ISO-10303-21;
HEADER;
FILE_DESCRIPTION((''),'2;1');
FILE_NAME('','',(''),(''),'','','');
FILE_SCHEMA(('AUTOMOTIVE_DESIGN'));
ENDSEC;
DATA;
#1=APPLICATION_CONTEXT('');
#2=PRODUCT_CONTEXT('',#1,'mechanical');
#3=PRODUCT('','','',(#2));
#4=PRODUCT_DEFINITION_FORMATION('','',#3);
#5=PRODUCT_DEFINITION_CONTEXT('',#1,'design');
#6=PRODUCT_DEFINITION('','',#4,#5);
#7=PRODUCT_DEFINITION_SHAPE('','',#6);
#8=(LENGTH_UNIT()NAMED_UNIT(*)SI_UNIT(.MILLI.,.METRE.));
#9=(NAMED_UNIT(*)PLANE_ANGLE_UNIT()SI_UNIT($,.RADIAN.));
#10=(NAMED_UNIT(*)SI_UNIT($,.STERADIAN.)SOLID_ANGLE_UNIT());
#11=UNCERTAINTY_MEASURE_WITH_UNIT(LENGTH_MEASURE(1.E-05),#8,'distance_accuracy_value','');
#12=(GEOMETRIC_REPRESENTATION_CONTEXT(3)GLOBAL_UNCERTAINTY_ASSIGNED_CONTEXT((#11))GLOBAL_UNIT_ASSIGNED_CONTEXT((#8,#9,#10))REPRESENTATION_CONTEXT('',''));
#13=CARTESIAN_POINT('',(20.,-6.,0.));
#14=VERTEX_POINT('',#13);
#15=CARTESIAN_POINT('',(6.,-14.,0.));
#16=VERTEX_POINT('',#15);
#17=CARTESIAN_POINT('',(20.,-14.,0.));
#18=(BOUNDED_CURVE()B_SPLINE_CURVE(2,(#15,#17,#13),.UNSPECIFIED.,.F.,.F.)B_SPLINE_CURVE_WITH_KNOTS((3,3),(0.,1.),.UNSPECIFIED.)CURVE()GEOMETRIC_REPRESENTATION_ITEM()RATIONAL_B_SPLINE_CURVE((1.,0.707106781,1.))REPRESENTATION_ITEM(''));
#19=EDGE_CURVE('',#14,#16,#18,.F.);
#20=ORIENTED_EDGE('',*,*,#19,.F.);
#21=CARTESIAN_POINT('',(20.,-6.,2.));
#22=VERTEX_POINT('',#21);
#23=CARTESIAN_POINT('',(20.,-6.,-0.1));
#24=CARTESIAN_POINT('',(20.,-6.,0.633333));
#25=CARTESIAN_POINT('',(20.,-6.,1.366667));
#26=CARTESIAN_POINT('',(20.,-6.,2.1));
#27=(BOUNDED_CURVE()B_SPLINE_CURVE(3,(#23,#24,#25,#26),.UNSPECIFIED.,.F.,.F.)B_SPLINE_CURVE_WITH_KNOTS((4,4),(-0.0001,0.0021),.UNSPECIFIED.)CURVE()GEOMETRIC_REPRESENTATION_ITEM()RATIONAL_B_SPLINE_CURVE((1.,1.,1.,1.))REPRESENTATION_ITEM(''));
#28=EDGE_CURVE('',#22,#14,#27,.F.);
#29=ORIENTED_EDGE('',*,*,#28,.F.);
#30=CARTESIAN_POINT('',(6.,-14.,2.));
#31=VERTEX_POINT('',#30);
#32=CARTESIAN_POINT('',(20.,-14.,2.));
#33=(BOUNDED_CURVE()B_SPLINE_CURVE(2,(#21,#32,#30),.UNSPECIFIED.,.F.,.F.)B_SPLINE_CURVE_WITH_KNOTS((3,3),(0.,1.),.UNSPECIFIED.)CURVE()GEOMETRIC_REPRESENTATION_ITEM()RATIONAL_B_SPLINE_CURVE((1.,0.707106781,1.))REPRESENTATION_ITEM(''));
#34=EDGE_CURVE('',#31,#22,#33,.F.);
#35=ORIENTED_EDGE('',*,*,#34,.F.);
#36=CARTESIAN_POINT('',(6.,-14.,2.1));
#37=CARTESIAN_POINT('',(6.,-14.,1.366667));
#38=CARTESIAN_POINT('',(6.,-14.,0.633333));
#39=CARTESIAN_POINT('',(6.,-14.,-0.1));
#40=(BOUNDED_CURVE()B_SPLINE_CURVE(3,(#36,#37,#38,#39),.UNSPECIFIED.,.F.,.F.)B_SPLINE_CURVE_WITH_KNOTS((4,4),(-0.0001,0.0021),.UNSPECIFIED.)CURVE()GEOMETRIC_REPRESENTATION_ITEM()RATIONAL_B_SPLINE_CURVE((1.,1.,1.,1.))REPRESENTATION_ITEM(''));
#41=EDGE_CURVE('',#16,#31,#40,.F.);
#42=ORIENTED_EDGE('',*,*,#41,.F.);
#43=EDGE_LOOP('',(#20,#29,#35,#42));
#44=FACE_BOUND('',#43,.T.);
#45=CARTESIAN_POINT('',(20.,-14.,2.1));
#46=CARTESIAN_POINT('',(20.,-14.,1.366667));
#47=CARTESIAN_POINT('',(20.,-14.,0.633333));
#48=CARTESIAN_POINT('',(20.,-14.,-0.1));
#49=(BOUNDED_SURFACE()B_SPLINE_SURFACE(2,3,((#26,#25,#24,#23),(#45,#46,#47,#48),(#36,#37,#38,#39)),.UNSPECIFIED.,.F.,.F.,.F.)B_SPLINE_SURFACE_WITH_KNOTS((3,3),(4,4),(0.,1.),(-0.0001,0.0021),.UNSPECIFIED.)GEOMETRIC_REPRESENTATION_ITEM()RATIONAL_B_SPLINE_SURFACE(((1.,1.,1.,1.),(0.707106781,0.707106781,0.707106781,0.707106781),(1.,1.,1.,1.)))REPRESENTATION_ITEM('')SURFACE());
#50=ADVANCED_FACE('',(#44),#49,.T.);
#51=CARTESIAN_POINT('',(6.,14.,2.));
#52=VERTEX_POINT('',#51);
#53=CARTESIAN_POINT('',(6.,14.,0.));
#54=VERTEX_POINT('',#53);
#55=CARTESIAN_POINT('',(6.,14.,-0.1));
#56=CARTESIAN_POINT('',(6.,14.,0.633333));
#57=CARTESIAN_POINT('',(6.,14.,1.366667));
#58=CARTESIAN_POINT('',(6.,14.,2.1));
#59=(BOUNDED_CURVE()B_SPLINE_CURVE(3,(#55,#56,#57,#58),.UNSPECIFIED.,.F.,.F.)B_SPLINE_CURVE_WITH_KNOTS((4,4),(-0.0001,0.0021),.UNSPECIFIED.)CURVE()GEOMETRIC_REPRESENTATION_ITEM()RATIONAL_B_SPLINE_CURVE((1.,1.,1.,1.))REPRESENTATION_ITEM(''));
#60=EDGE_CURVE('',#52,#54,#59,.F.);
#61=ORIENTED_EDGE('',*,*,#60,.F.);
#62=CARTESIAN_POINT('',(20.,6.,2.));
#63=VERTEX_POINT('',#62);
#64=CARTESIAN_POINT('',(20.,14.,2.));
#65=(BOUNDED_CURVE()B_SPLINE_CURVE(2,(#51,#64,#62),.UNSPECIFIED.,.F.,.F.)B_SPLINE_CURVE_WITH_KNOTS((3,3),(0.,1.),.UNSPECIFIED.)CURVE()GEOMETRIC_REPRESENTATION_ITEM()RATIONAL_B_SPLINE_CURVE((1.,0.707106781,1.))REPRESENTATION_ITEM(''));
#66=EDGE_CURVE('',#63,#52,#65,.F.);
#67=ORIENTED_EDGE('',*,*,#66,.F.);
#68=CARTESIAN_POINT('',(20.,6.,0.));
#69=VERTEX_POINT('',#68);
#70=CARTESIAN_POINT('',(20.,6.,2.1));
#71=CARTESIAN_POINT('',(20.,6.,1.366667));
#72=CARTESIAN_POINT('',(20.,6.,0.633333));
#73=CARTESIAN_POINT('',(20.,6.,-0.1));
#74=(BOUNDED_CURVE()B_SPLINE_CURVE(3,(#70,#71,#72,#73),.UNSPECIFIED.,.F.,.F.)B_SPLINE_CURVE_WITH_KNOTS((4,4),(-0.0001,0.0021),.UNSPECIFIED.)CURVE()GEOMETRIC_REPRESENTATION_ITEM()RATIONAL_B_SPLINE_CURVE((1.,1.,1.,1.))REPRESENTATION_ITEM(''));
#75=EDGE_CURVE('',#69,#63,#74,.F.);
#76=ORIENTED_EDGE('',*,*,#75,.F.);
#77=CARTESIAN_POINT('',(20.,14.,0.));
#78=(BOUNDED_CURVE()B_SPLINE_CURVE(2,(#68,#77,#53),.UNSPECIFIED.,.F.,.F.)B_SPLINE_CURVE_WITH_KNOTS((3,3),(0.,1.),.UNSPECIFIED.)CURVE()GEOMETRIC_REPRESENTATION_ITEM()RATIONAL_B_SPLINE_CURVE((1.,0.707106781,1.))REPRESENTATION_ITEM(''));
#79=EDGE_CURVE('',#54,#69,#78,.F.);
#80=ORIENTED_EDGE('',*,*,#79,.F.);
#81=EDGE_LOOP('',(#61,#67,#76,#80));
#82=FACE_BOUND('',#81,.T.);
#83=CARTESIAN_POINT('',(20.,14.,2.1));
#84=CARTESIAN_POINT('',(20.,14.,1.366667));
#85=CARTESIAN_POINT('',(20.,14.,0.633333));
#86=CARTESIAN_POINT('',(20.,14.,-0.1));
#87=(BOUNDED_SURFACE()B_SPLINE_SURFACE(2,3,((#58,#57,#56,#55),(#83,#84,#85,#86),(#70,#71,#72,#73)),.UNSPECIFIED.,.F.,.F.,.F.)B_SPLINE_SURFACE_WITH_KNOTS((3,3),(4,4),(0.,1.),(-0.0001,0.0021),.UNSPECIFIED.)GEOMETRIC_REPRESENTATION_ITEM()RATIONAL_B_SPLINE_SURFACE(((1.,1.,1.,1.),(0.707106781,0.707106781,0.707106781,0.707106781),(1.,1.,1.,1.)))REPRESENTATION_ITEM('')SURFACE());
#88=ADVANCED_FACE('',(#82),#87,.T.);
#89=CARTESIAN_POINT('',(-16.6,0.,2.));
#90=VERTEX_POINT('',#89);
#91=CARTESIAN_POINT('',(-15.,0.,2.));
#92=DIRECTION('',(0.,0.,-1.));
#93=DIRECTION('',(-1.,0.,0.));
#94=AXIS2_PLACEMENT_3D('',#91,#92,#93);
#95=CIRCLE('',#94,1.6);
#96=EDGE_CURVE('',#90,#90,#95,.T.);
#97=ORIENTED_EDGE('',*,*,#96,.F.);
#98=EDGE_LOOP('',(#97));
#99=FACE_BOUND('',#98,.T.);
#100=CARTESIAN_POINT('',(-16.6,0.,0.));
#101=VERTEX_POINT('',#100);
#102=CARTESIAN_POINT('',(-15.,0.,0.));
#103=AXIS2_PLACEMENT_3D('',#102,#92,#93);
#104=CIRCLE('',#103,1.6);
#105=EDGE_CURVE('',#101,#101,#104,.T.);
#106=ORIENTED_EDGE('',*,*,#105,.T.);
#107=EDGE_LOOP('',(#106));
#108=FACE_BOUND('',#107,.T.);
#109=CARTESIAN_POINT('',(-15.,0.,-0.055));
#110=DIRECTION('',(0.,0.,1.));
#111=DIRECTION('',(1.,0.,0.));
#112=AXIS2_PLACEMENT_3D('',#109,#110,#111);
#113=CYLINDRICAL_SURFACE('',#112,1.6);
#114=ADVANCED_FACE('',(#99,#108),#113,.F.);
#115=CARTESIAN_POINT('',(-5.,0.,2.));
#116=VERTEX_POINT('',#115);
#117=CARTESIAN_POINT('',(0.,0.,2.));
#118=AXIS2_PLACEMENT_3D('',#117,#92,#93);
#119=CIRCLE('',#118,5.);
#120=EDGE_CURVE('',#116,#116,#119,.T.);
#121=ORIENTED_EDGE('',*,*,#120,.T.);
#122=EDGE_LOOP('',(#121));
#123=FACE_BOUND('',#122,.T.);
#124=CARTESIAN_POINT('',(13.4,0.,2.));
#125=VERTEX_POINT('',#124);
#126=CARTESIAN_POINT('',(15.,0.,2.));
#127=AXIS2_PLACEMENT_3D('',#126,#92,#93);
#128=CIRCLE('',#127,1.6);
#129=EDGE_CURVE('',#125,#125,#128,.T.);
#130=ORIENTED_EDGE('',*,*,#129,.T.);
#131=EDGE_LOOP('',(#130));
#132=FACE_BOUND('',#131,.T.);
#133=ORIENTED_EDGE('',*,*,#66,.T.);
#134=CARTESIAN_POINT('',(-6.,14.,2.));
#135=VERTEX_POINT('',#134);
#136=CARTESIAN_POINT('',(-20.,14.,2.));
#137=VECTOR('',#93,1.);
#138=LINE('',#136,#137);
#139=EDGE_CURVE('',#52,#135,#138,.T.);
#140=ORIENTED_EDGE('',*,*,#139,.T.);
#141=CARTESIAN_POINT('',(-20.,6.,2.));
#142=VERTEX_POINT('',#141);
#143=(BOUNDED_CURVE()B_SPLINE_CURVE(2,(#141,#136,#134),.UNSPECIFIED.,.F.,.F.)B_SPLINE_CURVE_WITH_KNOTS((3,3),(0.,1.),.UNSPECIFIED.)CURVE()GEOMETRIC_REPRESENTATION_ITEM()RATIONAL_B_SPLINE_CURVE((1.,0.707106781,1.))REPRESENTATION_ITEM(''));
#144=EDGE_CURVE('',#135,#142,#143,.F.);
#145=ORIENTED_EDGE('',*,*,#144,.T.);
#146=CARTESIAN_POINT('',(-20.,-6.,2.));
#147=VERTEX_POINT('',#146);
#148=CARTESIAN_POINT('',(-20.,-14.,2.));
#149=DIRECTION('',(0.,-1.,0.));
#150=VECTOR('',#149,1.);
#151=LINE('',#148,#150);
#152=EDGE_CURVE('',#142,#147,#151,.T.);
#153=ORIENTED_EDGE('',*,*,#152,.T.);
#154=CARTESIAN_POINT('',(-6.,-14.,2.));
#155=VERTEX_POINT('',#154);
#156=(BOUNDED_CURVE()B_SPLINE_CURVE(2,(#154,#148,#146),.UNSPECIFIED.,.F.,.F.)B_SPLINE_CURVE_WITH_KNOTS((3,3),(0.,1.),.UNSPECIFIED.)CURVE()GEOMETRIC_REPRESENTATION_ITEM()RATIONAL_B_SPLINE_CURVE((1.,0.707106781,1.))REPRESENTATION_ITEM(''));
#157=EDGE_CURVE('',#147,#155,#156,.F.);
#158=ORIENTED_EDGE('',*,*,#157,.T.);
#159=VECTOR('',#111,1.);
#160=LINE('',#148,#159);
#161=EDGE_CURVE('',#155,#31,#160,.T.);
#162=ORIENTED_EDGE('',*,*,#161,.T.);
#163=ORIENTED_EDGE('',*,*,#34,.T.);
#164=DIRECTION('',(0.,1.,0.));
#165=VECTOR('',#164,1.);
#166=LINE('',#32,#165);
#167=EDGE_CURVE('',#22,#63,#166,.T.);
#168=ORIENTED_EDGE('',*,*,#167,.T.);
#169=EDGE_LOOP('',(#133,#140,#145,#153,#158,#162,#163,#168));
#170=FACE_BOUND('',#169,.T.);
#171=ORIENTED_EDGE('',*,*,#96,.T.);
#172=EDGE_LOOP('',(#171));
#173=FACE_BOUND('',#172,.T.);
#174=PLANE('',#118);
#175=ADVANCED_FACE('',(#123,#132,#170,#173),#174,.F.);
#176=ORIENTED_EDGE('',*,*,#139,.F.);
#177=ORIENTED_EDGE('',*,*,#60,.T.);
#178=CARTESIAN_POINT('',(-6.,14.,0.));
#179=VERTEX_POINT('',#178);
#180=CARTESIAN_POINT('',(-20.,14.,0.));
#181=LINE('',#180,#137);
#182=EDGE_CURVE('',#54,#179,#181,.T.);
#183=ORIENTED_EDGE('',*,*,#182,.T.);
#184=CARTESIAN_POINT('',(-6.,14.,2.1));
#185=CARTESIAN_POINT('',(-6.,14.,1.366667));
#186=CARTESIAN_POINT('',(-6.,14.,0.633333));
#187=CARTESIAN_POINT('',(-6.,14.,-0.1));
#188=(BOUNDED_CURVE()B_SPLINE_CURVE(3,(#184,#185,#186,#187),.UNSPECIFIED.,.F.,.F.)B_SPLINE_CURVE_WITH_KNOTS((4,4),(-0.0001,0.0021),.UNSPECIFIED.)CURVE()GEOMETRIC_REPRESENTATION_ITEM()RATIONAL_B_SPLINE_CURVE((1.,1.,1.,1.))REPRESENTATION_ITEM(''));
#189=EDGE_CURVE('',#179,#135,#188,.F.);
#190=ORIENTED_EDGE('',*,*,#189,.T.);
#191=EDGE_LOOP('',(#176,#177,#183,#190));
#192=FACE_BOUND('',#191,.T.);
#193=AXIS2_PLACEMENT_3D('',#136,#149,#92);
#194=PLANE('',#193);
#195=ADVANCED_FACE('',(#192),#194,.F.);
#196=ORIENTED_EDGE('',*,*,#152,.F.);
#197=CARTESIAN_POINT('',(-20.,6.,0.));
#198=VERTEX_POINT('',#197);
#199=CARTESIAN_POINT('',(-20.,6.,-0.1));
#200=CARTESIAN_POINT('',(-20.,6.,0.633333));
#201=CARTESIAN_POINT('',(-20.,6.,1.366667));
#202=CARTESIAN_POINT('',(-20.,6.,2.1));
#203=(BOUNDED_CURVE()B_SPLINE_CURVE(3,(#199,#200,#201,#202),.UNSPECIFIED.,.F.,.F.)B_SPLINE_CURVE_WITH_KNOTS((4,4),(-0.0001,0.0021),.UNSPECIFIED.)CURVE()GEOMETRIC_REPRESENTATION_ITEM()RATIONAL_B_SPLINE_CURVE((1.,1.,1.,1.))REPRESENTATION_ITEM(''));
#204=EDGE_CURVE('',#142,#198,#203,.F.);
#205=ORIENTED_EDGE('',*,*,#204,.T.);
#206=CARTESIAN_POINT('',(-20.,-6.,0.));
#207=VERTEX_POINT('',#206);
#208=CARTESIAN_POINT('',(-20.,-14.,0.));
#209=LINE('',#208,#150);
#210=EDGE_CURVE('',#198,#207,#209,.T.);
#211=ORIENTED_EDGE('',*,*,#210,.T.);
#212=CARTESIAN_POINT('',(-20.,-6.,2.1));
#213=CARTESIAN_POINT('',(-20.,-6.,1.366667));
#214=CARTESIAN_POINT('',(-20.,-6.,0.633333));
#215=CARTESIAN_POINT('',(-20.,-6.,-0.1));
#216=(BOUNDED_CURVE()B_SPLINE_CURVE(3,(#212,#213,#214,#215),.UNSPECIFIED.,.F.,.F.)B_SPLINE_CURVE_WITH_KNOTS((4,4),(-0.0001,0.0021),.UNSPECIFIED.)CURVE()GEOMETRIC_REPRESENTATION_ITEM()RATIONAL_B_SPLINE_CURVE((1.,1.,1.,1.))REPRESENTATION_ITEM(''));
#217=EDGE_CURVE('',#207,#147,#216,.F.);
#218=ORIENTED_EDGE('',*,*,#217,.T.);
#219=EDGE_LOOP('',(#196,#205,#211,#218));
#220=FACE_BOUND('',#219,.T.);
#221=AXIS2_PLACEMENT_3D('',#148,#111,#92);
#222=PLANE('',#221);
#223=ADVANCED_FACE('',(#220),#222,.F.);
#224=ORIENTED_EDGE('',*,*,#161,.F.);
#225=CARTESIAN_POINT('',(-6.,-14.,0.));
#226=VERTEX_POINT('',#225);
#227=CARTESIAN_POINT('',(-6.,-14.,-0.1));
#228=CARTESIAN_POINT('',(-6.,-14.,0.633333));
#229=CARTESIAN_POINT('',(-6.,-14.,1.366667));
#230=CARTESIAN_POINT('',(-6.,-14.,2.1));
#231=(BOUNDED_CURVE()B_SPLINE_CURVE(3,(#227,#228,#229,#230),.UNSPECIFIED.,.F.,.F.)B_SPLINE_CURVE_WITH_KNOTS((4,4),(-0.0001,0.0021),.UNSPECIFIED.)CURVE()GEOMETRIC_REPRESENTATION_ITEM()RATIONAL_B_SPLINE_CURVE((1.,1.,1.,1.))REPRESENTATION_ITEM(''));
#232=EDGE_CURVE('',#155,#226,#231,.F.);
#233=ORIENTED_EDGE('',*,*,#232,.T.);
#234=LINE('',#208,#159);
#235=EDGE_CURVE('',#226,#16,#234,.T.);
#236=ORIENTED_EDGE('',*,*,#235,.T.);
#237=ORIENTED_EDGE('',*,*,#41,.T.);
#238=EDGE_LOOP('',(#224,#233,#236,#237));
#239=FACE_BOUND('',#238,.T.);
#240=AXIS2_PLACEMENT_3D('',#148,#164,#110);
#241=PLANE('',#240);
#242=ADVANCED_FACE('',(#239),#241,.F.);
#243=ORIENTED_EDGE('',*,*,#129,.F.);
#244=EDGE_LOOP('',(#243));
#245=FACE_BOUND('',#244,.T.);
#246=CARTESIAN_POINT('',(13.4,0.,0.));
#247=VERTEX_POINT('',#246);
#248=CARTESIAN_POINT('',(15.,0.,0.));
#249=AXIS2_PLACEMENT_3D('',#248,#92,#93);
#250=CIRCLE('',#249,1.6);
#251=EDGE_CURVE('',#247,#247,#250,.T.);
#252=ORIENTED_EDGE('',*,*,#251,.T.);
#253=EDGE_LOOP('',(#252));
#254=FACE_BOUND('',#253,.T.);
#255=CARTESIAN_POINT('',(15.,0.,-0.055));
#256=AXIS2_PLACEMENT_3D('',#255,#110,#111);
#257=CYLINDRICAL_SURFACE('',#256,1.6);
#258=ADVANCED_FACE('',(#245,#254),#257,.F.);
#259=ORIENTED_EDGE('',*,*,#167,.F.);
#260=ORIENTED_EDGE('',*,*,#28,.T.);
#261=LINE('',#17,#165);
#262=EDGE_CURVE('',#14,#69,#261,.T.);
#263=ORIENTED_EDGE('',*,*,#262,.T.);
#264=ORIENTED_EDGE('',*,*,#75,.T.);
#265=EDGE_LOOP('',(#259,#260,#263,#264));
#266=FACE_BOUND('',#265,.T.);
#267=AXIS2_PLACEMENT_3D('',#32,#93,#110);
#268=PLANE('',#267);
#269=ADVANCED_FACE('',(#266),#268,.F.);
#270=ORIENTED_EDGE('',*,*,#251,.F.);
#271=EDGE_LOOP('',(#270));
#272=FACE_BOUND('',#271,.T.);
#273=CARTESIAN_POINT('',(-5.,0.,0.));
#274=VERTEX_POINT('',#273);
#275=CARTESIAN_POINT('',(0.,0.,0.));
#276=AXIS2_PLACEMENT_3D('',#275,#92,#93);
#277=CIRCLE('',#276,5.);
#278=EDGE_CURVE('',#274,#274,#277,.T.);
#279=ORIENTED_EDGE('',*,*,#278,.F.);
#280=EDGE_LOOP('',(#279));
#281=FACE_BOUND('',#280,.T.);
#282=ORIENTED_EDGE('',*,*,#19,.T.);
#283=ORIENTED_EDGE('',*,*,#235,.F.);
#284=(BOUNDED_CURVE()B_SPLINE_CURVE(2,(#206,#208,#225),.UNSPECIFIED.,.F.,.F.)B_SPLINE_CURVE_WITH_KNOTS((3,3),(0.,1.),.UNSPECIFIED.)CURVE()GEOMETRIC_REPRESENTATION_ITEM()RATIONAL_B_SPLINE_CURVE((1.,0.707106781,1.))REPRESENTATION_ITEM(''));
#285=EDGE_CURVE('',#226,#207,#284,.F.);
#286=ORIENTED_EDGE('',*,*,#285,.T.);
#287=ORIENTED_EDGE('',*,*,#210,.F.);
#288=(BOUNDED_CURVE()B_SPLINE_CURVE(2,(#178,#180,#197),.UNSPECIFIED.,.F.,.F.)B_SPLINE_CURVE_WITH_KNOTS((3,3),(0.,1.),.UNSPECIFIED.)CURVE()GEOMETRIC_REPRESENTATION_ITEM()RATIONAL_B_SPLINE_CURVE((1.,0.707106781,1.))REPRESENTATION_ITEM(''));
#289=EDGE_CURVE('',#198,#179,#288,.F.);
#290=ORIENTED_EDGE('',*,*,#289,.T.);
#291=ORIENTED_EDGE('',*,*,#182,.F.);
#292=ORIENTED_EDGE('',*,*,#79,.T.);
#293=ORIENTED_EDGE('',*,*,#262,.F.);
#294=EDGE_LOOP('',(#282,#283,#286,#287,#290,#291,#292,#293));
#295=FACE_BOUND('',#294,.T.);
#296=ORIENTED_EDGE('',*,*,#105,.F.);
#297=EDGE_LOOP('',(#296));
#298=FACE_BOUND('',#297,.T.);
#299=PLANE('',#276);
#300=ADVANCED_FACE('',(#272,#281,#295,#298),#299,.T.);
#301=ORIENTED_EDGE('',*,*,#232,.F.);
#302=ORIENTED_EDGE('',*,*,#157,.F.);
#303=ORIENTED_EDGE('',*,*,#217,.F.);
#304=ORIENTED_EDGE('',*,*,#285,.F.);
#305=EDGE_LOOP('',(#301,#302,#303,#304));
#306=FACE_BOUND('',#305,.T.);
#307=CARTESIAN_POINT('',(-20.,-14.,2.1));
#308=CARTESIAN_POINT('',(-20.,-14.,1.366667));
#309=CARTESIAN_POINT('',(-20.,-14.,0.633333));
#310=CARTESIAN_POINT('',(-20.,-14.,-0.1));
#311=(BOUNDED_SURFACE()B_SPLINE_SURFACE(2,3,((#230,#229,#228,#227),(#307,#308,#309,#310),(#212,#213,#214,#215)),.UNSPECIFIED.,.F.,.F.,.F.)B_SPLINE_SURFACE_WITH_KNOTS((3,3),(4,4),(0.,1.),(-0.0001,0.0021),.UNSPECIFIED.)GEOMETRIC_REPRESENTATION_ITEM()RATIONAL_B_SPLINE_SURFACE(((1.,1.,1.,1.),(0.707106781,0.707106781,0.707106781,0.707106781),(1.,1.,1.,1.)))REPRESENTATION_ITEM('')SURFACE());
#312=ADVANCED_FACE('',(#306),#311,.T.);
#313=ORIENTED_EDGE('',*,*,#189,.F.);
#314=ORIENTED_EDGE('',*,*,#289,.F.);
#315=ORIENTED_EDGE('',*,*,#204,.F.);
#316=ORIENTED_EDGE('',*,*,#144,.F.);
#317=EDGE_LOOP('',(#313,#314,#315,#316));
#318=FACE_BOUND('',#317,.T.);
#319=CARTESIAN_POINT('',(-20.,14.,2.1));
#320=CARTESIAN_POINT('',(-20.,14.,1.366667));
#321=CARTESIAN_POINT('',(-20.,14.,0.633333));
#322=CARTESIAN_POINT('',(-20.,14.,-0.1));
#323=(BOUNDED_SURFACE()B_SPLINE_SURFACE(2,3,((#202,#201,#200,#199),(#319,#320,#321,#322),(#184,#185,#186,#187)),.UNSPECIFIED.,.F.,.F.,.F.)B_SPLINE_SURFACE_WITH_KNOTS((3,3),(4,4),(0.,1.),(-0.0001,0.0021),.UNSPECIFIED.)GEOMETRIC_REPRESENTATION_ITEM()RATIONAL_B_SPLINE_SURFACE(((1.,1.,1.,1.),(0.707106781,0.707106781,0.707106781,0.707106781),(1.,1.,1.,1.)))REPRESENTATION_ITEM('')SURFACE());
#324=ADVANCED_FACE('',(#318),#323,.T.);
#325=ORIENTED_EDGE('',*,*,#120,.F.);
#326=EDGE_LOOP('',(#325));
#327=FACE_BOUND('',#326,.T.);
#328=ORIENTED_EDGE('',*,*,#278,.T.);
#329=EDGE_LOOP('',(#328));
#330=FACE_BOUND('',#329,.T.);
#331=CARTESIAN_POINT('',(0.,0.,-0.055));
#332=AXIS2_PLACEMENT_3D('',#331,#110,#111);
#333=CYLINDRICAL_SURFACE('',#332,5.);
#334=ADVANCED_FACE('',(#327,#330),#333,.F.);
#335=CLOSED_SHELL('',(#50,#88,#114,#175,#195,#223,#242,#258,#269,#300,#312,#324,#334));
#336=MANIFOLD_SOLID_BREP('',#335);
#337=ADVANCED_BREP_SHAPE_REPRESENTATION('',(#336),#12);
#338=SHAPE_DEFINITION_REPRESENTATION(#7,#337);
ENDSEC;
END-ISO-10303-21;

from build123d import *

# Parameters (mm, degrees)
SZKIC1_W                    = 40
SZKIC1_H                    = 28
DODANIE_WYCI_GNI_CIE1_DEPTH = 2
ZAOKR_GLENIE1_SIZE          = 14
ZAOKR_GLENIE1_SIZE_2        = 8
SZKIC3_R                    = 1.6
SZKIC3_R_2                  = 5
WYTNIJ_WYCI_GNI_CIE1_DEPTH  = 29.653097735


with BuildPart() as part:
    # Szkic1 → Dodanie-wyciągnięcie1 (new body)
    with BuildSketch(Plane.XY):
        Rectangle(SZKIC1_W, SZKIC1_H)
    extrude(amount=DODANIE_WYCI_GNI_CIE1_DEPTH)

    # Zaokrąglenie1
    # an asymmetric fillet: 14, 8 mm, written as the material it takes off along each edge
    with BuildSketch(Plane(origin=(-20, 14, -35), x_dir=(1, 0, 0), z_dir=(0, 0, 1)), Plane(origin=(20, -14, -35), x_dir=(-1, 0, 0), z_dir=(0, 0, 1))) as zaokr_glenie1_piece_1:
        with BuildLine():
            Bezier((ZAOKR_GLENIE1_SIZE, 0), (0, 0), (0, -ZAOKR_GLENIE1_SIZE_2), weights=[1, 0.707106781, 1])
            Line((0, -ZAOKR_GLENIE1_SIZE_2), (0, 0))
            Line((0, 0), (ZAOKR_GLENIE1_SIZE, 0))
        make_face()
    extrude(amount=72, mode=Mode.SUBTRACT)
    with BuildSketch(Plane(origin=(-20, -14, -35), x_dir=(1, 0, 0), z_dir=(0, 0, 1))) as zaokr_glenie1_piece_2:
        with BuildLine():
            Bezier((ZAOKR_GLENIE1_SIZE, 0), (0, 0), (0, ZAOKR_GLENIE1_SIZE_2), weights=[1, 0.707106781, 1])
            Line((0, ZAOKR_GLENIE1_SIZE_2), (0, 0))
            Line((0, 0), (ZAOKR_GLENIE1_SIZE, 0))
        make_face()
    extrude(amount=72, mode=Mode.SUBTRACT)
    with BuildSketch(Plane(origin=(20, 14, -35), x_dir=(0, -1, 0), z_dir=(0, 0, 1))) as zaokr_glenie1_piece_3:
        with BuildLine():
            Bezier((ZAOKR_GLENIE1_SIZE_2, 0), (0, 0), (0, -ZAOKR_GLENIE1_SIZE), weights=[1, 0.707106781, 1])
            Line((0, -ZAOKR_GLENIE1_SIZE), (0, 0))
            Line((0, 0), (ZAOKR_GLENIE1_SIZE_2, 0))
        make_face()
    extrude(amount=72, mode=Mode.SUBTRACT)

    # Szkic3 → Wytnij-wyciągnięcie1 (cut, through all)
    with BuildSketch(Plane.XY.offset(15)):
        with Locations(Location((-15, -1e-09, 0), (0, 0, 180))):
            Circle(SZKIC3_R)
        with Locations(Location((15, -1e-09, 0), (0, 0, 180))):
            Circle(SZKIC3_R)
        with Locations(Location((0, 0, 0), (0, 0, 180))):
            Circle(SZKIC3_R_2)
    extrude(amount=-WYTNIJ_WYCI_GNI_CIE1_DEPTH, mode=Mode.SUBTRACT)


solid = part.part
